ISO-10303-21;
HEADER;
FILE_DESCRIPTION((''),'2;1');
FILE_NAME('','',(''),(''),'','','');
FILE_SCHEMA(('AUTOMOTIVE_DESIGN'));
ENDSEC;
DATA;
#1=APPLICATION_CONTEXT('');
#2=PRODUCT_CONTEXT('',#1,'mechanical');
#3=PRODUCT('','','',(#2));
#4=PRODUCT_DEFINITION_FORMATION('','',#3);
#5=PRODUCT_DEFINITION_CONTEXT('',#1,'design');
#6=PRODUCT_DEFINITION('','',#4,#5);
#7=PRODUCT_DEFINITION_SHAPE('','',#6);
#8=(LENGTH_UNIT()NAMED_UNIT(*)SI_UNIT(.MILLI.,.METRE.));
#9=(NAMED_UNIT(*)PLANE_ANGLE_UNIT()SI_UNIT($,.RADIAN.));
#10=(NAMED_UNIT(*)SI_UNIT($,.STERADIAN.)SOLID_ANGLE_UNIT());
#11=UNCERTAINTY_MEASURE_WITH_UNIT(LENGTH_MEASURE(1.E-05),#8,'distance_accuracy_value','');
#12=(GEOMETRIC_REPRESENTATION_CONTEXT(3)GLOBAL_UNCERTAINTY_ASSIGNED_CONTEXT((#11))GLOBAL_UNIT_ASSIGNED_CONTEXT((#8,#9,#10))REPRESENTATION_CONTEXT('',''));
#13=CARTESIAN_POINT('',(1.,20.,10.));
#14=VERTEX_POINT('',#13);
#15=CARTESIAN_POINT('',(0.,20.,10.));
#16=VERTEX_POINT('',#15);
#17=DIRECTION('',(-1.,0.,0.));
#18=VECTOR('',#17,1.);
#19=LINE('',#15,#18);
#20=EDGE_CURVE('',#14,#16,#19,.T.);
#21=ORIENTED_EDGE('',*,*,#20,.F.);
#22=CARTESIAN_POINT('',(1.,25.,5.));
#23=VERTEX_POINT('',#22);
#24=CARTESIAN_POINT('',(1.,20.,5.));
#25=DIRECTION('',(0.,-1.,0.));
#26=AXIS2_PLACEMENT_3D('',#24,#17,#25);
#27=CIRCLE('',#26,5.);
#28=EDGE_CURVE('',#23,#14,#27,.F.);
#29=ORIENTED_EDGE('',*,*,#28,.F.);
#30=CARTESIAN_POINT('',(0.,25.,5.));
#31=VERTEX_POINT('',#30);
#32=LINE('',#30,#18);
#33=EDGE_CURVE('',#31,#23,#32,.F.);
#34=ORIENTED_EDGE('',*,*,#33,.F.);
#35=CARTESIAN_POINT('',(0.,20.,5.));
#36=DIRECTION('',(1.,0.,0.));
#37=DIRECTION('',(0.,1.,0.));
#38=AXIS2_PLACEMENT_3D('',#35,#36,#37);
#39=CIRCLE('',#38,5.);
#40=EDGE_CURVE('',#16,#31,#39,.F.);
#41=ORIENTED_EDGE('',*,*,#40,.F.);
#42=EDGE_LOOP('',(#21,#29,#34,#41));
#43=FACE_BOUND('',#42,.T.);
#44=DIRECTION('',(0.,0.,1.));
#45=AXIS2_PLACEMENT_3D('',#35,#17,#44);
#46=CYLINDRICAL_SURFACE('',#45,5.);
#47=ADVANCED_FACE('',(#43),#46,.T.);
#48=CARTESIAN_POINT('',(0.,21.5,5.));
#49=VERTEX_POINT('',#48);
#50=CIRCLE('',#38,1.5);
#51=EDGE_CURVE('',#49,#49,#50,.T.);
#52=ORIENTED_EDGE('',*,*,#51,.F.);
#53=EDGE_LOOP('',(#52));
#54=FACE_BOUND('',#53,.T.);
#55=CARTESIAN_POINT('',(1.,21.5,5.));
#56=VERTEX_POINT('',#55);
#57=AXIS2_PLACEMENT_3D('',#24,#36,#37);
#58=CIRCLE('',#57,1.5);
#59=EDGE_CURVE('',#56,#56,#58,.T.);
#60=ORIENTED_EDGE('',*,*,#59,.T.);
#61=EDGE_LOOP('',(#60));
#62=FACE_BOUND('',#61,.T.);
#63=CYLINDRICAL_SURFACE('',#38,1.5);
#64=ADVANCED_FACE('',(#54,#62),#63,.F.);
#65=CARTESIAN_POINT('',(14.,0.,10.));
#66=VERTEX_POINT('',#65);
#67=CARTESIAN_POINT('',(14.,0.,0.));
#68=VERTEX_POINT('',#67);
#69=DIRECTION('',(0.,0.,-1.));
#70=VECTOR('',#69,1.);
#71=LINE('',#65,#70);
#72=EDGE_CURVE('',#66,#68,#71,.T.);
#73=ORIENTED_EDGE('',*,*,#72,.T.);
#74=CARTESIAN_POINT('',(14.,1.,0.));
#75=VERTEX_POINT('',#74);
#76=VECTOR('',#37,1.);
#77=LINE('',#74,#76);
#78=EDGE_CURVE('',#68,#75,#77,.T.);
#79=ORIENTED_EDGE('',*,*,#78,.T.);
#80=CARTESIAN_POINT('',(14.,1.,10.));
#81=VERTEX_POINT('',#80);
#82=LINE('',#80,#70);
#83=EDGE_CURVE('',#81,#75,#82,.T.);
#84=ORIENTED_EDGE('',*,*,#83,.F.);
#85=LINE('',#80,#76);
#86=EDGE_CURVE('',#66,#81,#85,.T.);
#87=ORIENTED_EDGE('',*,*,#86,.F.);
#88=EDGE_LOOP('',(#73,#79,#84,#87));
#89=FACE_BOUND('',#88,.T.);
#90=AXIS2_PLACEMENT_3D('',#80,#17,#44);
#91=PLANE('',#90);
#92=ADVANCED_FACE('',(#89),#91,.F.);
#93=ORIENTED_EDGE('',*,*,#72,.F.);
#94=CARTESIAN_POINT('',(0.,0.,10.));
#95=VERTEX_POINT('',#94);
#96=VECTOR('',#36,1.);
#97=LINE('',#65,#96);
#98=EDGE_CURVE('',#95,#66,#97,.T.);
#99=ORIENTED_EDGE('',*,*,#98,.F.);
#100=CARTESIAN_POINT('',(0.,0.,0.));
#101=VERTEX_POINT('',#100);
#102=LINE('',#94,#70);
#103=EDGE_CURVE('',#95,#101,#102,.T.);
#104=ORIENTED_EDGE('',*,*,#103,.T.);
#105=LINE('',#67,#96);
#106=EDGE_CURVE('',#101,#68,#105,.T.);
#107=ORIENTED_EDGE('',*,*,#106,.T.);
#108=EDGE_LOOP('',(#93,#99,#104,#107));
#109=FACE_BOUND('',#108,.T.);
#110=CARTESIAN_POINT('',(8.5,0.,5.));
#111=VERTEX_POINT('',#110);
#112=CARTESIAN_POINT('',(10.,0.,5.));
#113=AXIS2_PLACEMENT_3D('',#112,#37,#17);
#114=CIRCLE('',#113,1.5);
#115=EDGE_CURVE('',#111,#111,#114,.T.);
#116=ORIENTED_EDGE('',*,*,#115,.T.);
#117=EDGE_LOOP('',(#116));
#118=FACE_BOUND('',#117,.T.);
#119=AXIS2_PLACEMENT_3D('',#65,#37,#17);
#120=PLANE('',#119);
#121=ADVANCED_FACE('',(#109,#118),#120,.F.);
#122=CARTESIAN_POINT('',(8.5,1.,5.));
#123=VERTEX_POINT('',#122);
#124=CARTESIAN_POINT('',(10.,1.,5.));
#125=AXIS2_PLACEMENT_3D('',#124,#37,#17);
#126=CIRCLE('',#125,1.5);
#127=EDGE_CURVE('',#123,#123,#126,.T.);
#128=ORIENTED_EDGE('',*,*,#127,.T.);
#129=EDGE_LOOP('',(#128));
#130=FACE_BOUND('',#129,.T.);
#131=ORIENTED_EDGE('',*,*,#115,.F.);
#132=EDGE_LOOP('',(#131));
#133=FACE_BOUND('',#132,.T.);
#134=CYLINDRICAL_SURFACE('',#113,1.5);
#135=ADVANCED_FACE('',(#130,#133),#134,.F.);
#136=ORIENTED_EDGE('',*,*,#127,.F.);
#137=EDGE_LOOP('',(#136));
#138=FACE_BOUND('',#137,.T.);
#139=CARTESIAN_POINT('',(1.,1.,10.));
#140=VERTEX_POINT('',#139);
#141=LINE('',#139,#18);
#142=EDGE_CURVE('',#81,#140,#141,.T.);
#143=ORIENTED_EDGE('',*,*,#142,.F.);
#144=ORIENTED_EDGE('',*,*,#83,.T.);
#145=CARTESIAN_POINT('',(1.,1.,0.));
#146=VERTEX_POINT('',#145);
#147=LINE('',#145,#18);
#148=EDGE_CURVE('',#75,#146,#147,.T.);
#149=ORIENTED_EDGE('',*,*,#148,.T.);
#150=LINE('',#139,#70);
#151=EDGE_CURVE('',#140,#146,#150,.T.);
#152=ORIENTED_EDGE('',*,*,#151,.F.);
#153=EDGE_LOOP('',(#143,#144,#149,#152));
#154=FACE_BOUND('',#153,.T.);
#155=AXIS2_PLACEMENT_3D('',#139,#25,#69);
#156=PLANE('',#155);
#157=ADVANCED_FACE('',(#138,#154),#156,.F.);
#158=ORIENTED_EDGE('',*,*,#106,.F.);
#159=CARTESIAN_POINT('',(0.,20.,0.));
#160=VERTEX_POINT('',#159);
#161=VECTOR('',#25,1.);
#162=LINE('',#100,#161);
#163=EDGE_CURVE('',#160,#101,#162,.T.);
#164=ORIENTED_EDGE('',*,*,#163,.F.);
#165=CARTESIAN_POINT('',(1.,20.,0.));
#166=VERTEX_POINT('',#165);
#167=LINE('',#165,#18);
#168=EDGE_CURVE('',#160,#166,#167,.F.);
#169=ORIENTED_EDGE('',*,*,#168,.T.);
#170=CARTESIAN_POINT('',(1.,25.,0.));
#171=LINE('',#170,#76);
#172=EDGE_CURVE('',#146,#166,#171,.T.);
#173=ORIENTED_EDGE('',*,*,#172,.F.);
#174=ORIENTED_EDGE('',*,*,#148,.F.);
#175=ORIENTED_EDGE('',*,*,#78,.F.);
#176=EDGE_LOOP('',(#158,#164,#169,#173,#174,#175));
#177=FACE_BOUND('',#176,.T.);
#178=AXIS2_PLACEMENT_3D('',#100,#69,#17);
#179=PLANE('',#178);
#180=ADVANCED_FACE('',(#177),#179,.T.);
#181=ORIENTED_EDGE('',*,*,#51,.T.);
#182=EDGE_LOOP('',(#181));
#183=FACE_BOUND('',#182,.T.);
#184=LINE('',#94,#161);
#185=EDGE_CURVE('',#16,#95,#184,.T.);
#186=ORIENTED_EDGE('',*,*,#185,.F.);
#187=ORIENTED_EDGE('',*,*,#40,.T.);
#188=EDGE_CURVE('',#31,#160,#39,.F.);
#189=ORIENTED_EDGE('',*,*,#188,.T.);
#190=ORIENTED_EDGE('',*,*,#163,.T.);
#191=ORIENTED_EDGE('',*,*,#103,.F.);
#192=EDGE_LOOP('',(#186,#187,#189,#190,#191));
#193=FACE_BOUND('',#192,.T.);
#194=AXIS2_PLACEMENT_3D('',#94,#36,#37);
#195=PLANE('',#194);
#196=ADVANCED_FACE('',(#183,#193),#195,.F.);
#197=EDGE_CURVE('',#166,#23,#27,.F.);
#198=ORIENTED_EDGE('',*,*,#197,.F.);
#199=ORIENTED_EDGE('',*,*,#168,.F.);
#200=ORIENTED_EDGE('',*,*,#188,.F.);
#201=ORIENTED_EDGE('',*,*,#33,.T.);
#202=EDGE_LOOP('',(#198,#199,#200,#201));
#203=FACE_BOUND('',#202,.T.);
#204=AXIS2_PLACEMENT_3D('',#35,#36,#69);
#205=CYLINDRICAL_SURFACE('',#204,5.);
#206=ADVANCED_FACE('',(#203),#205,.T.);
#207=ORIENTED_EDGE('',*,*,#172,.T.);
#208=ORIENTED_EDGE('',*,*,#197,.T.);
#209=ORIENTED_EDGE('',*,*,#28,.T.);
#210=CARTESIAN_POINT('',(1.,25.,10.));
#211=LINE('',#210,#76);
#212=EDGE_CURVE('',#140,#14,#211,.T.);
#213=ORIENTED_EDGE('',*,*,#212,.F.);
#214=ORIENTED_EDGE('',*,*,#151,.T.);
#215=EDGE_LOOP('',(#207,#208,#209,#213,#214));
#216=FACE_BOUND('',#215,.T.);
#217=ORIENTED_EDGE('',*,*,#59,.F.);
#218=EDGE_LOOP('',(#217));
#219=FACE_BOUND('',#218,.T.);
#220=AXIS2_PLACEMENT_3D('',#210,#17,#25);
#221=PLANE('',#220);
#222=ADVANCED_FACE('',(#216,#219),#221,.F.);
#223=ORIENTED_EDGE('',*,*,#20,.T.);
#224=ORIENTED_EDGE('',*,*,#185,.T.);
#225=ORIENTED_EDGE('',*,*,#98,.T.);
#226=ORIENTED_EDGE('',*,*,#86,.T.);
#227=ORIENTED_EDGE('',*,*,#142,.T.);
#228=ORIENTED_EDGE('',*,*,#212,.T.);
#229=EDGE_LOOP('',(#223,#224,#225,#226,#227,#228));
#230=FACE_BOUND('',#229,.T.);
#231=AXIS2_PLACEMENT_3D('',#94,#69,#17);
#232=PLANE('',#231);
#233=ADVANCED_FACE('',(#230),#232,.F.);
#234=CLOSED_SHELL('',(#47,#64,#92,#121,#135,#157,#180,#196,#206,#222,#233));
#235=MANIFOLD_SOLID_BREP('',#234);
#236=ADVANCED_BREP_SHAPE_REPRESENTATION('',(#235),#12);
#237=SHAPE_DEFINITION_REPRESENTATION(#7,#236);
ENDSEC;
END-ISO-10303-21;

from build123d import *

# Parameters (mm, degrees)
BOSS_EXTRUDE1_DEPTH = 10
FILLET1_R           = 5
SKETCH2_R           = 1.5
CUT_EXTRUDE1_DEPTH  = 30.899832775
SKETCH3_R           = 1.5
CUT_EXTRUDE2_DEPTH  = 30.52964612


with BuildPart() as part:
    # Sketch1 → Boss-Extrude1 (new body)
    with BuildSketch(Plane.XY):
        Polygon((0, 0), (0, 25), (1, 25), (1, 1), (14, 1), (14, 0), align=None)
    extrude(amount=BOSS_EXTRUDE1_DEPTH)

    # Fillet1
    fillet1_edges = [part.edges().sort_by_distance(p)[0] for p in [
        (0.5, 25, 0),
        (0.5, 25, 10),
    ]]
    fillet(fillet1_edges, radius=FILLET1_R - 0.0001)  # a hair under: the kernel refuses the full size

    # Sketch2 → Cut-Extrude1 (cut, through all)
    with BuildSketch(Plane(origin=(1, 0, 0), x_dir=(0, 0, -1), z_dir=(1, 0, 0))):
        with Locations(Location((-5, 20, 0), (0, 0, 90))):
            Circle(SKETCH2_R)
    extrude(amount=-CUT_EXTRUDE1_DEPTH, mode=Mode.SUBTRACT)

    # Sketch3 → Cut-Extrude2 (cut, through all)
    with BuildSketch(Plane(origin=(0, 1, 0), x_dir=(1, 0, 0), z_dir=(0, 1, 0))):
        with Locations(Location((10, -5, 0), (0, 0, 180))):
            Circle(SKETCH3_R)
    extrude(amount=-CUT_EXTRUDE2_DEPTH, mode=Mode.SUBTRACT)


solid = part.part
